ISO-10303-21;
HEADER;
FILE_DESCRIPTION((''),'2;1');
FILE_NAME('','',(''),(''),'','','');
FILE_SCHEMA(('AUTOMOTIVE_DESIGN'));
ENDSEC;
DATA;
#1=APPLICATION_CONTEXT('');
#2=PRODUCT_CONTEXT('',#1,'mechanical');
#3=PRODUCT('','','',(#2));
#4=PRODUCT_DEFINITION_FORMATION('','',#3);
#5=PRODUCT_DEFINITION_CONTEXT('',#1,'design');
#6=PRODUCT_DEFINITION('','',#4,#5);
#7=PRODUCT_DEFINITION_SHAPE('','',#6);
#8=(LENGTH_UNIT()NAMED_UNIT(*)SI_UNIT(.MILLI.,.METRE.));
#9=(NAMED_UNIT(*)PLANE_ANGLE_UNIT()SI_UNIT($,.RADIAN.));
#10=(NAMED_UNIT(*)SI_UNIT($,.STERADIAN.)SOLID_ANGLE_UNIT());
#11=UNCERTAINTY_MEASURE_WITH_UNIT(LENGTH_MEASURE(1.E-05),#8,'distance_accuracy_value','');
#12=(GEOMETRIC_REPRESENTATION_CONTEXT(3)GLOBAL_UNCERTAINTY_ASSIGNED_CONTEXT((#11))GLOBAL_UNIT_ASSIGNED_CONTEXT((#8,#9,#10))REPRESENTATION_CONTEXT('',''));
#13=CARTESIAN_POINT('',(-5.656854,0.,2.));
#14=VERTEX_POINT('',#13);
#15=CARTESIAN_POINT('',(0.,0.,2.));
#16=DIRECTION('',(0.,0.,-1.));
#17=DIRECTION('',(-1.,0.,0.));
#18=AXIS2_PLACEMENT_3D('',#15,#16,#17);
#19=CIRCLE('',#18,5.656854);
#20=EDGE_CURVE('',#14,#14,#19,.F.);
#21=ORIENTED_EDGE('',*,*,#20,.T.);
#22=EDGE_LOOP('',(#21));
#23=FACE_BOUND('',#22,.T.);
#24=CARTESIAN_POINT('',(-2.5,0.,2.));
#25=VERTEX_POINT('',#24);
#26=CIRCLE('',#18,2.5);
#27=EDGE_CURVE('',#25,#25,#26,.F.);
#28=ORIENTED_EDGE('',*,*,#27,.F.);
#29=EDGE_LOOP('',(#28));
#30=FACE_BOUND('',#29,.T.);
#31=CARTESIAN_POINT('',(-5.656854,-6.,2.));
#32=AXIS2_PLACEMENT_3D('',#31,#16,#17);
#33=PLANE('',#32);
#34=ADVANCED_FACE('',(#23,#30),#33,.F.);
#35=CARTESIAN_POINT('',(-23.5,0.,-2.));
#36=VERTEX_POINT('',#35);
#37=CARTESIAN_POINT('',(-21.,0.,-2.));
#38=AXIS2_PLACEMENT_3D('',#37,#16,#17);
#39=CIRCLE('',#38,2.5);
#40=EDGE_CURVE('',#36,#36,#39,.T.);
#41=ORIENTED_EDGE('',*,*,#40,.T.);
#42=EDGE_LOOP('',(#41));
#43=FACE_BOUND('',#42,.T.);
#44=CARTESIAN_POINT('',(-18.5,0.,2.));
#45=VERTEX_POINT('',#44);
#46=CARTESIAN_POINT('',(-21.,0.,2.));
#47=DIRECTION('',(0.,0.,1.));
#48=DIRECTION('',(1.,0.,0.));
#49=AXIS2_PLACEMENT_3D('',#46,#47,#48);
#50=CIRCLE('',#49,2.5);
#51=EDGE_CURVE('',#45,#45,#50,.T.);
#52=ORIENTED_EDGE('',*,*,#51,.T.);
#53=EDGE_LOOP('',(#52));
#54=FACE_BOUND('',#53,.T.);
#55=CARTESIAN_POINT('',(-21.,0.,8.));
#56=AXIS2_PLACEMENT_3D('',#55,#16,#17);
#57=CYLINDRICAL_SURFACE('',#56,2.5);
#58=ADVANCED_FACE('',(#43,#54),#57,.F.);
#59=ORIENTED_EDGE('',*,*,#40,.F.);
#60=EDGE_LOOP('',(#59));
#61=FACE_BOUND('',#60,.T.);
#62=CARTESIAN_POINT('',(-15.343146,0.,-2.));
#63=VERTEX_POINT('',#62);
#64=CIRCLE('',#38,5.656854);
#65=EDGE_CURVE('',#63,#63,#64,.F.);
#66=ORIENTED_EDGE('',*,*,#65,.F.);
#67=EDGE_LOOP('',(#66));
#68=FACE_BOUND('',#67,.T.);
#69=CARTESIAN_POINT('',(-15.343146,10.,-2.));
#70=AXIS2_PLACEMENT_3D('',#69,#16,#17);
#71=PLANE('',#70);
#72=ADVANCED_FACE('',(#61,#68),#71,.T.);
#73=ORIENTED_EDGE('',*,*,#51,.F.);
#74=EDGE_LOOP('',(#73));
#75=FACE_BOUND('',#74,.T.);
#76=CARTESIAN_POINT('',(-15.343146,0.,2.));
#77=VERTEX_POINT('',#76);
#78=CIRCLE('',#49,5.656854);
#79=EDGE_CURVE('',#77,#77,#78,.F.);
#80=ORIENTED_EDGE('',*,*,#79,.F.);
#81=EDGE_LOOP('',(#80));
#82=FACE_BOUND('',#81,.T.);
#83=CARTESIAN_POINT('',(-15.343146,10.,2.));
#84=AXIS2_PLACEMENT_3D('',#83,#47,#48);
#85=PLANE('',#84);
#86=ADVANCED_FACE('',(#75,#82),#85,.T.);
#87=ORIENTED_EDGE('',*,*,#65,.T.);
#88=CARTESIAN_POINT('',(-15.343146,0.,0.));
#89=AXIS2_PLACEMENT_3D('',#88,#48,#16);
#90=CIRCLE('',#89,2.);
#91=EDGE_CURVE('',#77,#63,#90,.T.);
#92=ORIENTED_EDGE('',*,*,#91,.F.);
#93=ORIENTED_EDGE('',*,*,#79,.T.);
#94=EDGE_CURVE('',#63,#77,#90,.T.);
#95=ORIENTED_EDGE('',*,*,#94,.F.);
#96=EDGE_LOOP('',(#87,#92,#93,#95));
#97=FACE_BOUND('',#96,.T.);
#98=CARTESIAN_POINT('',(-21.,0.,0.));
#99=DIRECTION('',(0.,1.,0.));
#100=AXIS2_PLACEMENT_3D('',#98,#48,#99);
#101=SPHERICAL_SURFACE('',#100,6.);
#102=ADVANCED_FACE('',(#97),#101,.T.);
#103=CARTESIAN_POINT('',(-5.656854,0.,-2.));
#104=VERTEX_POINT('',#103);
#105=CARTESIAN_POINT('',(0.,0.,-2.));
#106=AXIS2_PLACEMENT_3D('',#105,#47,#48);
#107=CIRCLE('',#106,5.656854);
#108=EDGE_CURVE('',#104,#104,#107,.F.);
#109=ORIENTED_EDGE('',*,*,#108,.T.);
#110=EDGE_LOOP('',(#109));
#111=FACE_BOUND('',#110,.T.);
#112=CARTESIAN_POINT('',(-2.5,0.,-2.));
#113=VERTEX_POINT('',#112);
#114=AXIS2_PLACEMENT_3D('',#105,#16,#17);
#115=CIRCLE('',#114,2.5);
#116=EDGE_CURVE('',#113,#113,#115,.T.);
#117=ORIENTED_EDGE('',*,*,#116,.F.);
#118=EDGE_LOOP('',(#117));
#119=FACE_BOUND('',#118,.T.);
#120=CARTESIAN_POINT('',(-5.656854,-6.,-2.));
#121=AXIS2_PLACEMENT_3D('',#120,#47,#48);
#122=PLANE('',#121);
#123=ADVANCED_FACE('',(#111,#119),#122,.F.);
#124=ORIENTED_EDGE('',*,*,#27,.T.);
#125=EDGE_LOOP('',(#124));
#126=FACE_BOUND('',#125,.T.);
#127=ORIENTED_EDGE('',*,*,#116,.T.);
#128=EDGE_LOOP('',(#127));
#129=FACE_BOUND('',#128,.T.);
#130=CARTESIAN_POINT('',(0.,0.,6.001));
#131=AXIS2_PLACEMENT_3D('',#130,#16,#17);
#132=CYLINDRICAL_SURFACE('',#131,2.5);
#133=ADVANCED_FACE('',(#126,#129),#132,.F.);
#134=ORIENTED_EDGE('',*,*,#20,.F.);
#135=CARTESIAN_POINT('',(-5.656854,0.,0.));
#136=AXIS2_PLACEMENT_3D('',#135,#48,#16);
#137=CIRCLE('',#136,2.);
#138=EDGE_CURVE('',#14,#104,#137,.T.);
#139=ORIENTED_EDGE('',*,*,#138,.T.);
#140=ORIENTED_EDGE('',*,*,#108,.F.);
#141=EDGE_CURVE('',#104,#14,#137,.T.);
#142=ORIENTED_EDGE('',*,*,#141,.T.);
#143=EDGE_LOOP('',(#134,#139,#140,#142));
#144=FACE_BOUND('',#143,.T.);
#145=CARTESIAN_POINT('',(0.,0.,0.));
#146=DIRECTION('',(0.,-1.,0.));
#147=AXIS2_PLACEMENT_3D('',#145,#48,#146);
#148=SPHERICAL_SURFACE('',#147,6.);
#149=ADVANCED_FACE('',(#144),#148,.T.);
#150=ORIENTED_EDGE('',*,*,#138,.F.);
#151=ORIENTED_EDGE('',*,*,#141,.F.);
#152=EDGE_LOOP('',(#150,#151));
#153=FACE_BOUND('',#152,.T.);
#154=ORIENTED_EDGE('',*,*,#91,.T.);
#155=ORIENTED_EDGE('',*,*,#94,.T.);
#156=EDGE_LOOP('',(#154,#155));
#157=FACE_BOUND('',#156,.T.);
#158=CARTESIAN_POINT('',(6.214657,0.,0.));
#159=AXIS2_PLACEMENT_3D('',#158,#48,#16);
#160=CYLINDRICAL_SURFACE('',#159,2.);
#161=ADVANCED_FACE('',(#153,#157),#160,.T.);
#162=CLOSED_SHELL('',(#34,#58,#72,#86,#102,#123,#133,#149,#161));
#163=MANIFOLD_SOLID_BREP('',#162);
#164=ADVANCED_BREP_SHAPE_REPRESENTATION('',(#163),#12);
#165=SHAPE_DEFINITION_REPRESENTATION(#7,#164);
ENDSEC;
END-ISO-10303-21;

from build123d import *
from build123d.topology import SkipClean

# Parameters (mm, degrees)
CUT_EXTRUDE4_DEPTH       = 29.301943396
CUT_EXTRUDE4_DEPTH_BACK  = 29.301943396
CUT_EXTRUDE5_REACH       = 30.792
SKETCH5_R                = 2.5
CUT_EXTRUDE10_DEPTH      = 10
CUT_EXTRUDE10_DEPTH_BACK = 10
SKETCH9_R                = 2.5
CUT_EXTRUDE11_DEPTH      = 10


with BuildPart() as part:
    # Sketch1 → Revolve1 (revolve)
    with BuildSketch(Plane.XY):
        with BuildLine():
            Line((6, 0), (-27, 0))
            ThreePointArc((-27, 0), (-22.014611872, 5.913591358), (-15.343145751, 2))
            Line((-15.343145751, 2), (-5.656854249, 2))
            ThreePointArc((-5.656854249, 2), (1.014611872, 5.913591358), (6, 0))
        make_face()
    revolve(axis=Axis((6.214656997, 0, 0), (-1, 0, 0)))

    # Sketch4 → Cut-Extrude4 (cut, two sides: drawn at the far end of the back side and taken through both)
    with SkipClean():  # the faces are left unmerged after this step: merging them gives an invalid solid
        with BuildSketch(Plane(origin=(0, 0, 0), x_dir=(1, 0, 0), z_dir=(0, 1, 0)).offset(-CUT_EXTRUDE4_DEPTH_BACK)):
            with BuildLine():
                Line((-5.656854249, 2), (5.656854249, 2))
                ThreePointArc((5.656854249, 2), (0, 6), (-5.656854249, 2))
            make_face()
            with BuildLine():
                Line((-5.656854249, -2), (5.656854249, -2))
                ThreePointArc((5.656854249, -2), (0, -6), (-5.656854249, -2))
            make_face()
        extrude(amount=CUT_EXTRUDE4_DEPTH + CUT_EXTRUDE4_DEPTH_BACK, mode=Mode.SUBTRACT)

    # Sketch5 → Cut-Extrude5 (cut, up to next)
    with BuildSketch(Plane(origin=(0, 0, -2), x_dir=(-1, 0, 0), z_dir=(0, 0, -1)), mode=Mode.PRIVATE) as cut_extrude5_sk1:
        Circle(SKETCH5_R)
    cut_extrude5_tool1 = extrude(cut_extrude5_sk1.sketch, amount=-CUT_EXTRUDE5_REACH, mode=Mode.PRIVATE) & part.part
    add(cut_extrude5_tool1.solids().sort_by_distance((0, 0, -2))[0], mode=Mode.SUBTRACT)

    # Sketch8 → Cut-Extrude10 (cut, two sides: drawn at the far end of the back side and taken through both)
    with SkipClean():  # the faces are left unmerged after this step: merging them gives an invalid solid
        with BuildSketch(Plane(origin=(0, 0, 0), x_dir=(1, 0, 0), z_dir=(0, 1, 0)).offset(-CUT_EXTRUDE10_DEPTH_BACK)):
            with BuildLine():
                Line((-15.343145751, 2), (-26.656854249, 2))
                ThreePointArc((-26.656854249, 2), (-21, 6), (-15.343145751, 2))
            make_face()
            with BuildLine():
                Line((-15.343145751, -2), (-26.656854249, -2))
                ThreePointArc((-26.656854249, -2), (-21, -6), (-15.343145751, -2))
            make_face()
        extrude(amount=CUT_EXTRUDE10_DEPTH + CUT_EXTRUDE10_DEPTH_BACK, mode=Mode.SUBTRACT)

    # Sketch9 → Cut-Extrude11 (cut)
    with SkipClean():  # the faces are left unmerged after this step: merging them gives an invalid solid
        with BuildSketch(Plane(origin=(0, 0, -2), x_dir=(-1, 0, 0), z_dir=(0, 0, -1))):
            with Locations((21, 0)):
                Circle(SKETCH9_R)
        extrude(amount=-CUT_EXTRUDE11_DEPTH, mode=Mode.SUBTRACT)


solid = part.part
